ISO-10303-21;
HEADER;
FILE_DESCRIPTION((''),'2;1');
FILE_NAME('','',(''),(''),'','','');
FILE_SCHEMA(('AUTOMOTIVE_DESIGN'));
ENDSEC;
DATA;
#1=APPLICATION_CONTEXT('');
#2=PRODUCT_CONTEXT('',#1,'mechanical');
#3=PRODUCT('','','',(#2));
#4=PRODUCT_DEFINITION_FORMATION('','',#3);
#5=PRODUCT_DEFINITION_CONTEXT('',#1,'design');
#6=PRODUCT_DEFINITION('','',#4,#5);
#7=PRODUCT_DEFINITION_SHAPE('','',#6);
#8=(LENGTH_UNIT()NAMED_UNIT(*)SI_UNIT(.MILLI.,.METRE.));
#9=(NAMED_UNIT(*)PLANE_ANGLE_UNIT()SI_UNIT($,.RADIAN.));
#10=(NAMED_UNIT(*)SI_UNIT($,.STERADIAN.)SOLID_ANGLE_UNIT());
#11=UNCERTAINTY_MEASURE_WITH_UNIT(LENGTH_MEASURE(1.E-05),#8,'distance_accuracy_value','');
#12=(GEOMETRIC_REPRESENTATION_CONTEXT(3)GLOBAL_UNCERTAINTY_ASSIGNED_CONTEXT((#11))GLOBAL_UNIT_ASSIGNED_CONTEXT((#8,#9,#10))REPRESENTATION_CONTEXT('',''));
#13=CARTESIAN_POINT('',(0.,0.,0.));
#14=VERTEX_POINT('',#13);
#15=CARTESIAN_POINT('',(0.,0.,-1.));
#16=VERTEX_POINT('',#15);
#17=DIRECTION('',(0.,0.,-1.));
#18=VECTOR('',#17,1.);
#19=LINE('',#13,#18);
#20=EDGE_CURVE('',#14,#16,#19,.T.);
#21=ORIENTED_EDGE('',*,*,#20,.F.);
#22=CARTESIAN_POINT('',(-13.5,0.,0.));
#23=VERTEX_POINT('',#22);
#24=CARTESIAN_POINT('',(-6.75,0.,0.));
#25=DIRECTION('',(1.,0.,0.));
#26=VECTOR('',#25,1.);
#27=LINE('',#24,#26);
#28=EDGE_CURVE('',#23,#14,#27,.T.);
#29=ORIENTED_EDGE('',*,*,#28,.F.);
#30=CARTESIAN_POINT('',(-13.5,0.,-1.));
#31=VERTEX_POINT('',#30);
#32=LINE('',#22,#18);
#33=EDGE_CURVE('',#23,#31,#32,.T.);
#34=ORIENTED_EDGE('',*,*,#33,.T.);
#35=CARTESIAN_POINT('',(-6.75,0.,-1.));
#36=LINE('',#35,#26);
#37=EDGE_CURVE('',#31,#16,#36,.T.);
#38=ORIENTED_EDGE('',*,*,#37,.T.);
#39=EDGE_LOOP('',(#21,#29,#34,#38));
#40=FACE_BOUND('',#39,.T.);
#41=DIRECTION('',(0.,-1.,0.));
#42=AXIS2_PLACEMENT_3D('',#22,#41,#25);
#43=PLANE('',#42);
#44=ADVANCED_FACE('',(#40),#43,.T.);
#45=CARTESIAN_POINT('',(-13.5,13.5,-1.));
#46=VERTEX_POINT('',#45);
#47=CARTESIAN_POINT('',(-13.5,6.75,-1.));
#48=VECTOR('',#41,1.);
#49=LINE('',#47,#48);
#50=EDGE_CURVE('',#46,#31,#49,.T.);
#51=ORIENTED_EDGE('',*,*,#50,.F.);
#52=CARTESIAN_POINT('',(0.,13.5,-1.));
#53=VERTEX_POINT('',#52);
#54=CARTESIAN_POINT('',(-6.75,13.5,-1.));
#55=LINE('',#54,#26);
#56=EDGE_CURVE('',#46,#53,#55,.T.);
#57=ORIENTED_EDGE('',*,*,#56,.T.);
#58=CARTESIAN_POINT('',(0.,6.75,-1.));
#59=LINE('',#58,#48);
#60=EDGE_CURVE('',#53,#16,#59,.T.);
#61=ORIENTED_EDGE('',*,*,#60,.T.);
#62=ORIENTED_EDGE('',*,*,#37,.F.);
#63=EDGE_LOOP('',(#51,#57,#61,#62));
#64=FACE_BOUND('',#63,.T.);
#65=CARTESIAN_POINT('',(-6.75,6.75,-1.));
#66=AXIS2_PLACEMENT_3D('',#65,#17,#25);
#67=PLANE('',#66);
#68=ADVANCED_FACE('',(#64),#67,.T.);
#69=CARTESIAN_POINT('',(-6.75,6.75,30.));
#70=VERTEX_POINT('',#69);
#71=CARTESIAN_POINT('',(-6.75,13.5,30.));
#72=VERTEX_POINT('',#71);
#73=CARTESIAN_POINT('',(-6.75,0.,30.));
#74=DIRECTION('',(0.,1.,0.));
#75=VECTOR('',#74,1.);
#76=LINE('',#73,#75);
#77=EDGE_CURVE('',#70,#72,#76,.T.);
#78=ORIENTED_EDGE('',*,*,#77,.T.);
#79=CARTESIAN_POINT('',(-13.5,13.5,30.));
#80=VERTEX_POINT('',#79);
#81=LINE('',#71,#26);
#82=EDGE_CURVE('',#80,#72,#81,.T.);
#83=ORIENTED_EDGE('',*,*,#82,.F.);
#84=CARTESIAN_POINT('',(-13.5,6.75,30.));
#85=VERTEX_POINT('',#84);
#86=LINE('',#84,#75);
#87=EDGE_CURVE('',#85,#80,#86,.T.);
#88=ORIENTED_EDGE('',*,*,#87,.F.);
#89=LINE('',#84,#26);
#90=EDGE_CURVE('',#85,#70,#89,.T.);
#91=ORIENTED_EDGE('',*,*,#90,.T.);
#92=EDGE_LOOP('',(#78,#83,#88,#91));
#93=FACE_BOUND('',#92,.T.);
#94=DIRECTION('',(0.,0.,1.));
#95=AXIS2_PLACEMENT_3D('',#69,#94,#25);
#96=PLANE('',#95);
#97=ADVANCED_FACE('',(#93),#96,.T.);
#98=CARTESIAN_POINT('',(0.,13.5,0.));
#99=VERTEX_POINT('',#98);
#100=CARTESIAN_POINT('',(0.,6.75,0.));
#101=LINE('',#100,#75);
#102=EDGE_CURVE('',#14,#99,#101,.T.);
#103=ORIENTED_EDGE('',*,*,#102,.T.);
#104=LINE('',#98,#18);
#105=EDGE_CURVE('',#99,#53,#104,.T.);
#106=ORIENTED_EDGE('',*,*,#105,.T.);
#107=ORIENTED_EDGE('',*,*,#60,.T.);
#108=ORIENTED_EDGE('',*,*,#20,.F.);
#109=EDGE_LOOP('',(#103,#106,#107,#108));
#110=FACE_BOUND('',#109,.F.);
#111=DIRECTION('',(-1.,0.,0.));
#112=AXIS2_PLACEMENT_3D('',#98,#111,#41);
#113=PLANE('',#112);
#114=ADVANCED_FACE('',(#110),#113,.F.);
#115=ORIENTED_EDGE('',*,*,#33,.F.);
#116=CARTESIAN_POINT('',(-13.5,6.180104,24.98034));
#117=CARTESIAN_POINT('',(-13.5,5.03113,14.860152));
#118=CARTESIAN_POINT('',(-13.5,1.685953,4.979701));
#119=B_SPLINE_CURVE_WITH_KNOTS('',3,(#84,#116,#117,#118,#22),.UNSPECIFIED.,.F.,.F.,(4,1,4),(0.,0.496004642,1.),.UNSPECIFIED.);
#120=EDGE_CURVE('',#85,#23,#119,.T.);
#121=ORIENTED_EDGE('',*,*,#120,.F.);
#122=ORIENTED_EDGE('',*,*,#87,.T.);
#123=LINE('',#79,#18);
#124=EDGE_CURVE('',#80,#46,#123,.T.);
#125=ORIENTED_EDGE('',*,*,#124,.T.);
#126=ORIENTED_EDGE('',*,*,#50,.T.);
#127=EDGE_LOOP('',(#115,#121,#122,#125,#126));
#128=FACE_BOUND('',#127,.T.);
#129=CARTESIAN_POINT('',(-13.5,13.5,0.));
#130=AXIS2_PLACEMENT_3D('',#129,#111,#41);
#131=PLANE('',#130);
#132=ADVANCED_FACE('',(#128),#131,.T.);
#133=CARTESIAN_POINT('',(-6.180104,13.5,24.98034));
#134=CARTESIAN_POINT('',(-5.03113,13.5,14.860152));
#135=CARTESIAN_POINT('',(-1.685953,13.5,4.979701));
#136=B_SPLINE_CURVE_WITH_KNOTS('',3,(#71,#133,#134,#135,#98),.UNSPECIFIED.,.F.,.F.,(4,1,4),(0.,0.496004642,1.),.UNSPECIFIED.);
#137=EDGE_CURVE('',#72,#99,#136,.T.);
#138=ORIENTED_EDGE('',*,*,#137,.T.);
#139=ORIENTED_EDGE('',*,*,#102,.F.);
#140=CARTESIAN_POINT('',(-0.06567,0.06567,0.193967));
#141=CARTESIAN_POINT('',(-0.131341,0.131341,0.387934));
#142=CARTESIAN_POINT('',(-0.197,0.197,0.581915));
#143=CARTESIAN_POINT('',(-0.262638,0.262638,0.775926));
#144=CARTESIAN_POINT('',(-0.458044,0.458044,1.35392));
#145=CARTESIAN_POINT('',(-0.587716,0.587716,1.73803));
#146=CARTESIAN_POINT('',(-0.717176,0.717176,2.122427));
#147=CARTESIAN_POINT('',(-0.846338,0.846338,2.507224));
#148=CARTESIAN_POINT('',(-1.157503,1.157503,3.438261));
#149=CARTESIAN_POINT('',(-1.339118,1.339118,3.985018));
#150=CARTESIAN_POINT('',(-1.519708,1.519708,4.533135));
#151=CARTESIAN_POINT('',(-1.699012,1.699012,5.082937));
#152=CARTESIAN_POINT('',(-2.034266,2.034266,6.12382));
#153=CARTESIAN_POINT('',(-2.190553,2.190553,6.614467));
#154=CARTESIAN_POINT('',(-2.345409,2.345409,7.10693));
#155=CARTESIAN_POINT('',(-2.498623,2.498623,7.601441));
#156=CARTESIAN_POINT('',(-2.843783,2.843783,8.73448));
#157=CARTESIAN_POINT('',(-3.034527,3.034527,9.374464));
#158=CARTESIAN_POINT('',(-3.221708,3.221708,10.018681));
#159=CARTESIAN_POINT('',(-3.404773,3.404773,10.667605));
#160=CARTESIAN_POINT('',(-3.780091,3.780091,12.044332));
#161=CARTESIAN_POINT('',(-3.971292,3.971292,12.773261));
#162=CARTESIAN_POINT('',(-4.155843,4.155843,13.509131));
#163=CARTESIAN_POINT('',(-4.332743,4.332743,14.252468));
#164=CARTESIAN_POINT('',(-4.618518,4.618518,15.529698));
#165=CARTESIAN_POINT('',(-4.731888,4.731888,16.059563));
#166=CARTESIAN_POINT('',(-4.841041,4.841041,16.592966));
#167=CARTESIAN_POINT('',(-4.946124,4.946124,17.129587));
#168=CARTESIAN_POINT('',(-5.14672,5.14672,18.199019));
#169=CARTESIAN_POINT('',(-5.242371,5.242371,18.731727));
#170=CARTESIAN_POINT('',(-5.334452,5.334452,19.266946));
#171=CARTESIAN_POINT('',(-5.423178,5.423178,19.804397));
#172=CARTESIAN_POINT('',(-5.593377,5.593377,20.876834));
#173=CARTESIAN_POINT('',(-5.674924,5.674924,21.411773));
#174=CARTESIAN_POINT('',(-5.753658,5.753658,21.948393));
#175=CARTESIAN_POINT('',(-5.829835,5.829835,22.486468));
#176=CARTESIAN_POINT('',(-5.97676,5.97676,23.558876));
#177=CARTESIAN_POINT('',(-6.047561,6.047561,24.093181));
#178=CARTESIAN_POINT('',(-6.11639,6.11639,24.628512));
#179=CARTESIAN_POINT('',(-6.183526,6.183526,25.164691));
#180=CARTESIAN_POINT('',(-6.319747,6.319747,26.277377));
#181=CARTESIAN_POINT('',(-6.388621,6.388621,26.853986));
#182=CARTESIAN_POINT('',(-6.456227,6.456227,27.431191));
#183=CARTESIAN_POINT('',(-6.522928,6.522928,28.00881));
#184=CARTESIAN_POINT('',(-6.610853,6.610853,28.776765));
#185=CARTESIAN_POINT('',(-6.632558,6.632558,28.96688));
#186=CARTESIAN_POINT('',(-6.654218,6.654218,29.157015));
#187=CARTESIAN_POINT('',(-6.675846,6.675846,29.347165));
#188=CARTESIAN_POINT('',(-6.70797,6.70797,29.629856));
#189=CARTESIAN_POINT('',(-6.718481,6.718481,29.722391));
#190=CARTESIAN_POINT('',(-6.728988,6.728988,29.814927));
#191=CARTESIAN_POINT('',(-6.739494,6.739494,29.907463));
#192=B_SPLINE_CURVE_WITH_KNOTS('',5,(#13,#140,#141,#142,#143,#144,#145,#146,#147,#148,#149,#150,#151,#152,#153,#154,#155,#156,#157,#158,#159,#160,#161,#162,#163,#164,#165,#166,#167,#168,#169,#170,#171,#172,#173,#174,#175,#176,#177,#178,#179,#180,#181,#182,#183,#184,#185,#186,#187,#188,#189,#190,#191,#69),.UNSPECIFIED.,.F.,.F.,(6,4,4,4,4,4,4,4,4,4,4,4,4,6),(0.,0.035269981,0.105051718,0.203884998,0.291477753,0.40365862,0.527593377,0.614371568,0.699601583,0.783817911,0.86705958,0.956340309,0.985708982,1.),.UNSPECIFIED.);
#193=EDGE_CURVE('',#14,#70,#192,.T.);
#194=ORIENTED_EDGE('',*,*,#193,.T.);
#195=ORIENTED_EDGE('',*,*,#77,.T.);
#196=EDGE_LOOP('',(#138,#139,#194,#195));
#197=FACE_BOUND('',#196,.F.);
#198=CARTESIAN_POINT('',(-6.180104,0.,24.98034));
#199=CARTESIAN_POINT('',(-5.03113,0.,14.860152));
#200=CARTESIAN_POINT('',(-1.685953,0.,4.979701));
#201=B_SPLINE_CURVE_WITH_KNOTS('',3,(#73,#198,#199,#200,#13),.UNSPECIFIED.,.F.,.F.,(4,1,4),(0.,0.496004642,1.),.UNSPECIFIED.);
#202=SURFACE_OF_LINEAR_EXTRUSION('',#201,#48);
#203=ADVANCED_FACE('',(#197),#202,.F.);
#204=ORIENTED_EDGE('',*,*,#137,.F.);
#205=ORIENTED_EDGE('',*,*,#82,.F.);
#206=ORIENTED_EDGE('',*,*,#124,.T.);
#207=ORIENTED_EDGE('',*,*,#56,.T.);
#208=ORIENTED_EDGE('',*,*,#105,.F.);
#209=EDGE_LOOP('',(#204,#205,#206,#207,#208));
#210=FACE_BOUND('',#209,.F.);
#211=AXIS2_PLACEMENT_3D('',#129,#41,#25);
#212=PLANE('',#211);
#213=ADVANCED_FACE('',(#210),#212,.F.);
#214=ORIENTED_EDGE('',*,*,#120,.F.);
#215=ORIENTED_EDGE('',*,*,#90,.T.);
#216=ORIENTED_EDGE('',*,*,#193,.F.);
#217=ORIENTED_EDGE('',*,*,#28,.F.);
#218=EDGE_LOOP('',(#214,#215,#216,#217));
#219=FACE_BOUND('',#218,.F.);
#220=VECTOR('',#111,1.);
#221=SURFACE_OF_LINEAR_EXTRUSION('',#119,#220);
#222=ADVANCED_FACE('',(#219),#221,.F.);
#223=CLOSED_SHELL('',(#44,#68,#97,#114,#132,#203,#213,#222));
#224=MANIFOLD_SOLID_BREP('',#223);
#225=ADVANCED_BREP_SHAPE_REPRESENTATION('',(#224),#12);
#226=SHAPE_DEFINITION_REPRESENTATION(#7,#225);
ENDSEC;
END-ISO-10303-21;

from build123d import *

# Parameters (mm, degrees)
F0_W     = 13.5
F0_H     = 13.5
F1_DEPTH = 30
F3_DEPTH = 13.5
F5_DEPTH = 13.5
F6_W     = 13.5
F6_H     = 13.5
F7_DEPTH = 1


# Not quite as in the source:
# - a feature names something its author has since deleted; it is built from what else it names


with BuildPart() as f1:
    # F0 (on Top) → F1 (new body)
    with BuildSketch(Plane.XY):
        with Locations((-6.75, 6.75)):
            Rectangle(F0_W, F0_H)
    extrude(amount=F1_DEPTH)

    # F2 (on face) → F3 (cut)
    with BuildSketch(Plane.XZ):
        with BuildLine():
            add(Edge.make_bspline(
                [(-6.75, 30), (-6.180103722, 24.9803399372), (-5.0311300437, 14.8601522679), (-1.6859534664, 4.9797013811), (0, 0)],
                knots=[0, 0, 0, 0, 0.4960046421, 1, 1, 1, 1], degree=3))
            Line((0, 0), (0, 30))
            Line((0, 30), (-6.75, 30))
        make_face()
    extrude(amount=-F3_DEPTH, mode=Mode.SUBTRACT)

    # F4 (on face) → F5 (cut)
    with BuildSketch(Plane(origin=(-13.5, 0, 0), x_dir=(0, -1, 0), z_dir=(-1, 0, 0))):
        with BuildLine():
            Line((0, 0), (0, 30))
            Line((0, 30), (-6.75, 30))
            add(Edge.make_bspline(
                [(-6.75, 30), (-6.180103722, 24.9803399372), (-5.0311300437, 14.8601522679), (-1.6859534664, 4.9797013811), (0, 0)],
                knots=[0, 0, 0, 0, 0.4960046421, 1, 1, 1, 1], degree=3))
        make_face()
    extrude(amount=-F5_DEPTH, mode=Mode.SUBTRACT)

    # F6 (on face) → F7 (join)
    with BuildSketch(Plane(origin=(0, 0, 0), x_dir=(1, 0, 0), z_dir=(0, 0, -1))):
        with Locations((-6.75, -6.75)):
            Rectangle(F6_W, F6_H)
    extrude(amount=F7_DEPTH)


solid = f1.part
